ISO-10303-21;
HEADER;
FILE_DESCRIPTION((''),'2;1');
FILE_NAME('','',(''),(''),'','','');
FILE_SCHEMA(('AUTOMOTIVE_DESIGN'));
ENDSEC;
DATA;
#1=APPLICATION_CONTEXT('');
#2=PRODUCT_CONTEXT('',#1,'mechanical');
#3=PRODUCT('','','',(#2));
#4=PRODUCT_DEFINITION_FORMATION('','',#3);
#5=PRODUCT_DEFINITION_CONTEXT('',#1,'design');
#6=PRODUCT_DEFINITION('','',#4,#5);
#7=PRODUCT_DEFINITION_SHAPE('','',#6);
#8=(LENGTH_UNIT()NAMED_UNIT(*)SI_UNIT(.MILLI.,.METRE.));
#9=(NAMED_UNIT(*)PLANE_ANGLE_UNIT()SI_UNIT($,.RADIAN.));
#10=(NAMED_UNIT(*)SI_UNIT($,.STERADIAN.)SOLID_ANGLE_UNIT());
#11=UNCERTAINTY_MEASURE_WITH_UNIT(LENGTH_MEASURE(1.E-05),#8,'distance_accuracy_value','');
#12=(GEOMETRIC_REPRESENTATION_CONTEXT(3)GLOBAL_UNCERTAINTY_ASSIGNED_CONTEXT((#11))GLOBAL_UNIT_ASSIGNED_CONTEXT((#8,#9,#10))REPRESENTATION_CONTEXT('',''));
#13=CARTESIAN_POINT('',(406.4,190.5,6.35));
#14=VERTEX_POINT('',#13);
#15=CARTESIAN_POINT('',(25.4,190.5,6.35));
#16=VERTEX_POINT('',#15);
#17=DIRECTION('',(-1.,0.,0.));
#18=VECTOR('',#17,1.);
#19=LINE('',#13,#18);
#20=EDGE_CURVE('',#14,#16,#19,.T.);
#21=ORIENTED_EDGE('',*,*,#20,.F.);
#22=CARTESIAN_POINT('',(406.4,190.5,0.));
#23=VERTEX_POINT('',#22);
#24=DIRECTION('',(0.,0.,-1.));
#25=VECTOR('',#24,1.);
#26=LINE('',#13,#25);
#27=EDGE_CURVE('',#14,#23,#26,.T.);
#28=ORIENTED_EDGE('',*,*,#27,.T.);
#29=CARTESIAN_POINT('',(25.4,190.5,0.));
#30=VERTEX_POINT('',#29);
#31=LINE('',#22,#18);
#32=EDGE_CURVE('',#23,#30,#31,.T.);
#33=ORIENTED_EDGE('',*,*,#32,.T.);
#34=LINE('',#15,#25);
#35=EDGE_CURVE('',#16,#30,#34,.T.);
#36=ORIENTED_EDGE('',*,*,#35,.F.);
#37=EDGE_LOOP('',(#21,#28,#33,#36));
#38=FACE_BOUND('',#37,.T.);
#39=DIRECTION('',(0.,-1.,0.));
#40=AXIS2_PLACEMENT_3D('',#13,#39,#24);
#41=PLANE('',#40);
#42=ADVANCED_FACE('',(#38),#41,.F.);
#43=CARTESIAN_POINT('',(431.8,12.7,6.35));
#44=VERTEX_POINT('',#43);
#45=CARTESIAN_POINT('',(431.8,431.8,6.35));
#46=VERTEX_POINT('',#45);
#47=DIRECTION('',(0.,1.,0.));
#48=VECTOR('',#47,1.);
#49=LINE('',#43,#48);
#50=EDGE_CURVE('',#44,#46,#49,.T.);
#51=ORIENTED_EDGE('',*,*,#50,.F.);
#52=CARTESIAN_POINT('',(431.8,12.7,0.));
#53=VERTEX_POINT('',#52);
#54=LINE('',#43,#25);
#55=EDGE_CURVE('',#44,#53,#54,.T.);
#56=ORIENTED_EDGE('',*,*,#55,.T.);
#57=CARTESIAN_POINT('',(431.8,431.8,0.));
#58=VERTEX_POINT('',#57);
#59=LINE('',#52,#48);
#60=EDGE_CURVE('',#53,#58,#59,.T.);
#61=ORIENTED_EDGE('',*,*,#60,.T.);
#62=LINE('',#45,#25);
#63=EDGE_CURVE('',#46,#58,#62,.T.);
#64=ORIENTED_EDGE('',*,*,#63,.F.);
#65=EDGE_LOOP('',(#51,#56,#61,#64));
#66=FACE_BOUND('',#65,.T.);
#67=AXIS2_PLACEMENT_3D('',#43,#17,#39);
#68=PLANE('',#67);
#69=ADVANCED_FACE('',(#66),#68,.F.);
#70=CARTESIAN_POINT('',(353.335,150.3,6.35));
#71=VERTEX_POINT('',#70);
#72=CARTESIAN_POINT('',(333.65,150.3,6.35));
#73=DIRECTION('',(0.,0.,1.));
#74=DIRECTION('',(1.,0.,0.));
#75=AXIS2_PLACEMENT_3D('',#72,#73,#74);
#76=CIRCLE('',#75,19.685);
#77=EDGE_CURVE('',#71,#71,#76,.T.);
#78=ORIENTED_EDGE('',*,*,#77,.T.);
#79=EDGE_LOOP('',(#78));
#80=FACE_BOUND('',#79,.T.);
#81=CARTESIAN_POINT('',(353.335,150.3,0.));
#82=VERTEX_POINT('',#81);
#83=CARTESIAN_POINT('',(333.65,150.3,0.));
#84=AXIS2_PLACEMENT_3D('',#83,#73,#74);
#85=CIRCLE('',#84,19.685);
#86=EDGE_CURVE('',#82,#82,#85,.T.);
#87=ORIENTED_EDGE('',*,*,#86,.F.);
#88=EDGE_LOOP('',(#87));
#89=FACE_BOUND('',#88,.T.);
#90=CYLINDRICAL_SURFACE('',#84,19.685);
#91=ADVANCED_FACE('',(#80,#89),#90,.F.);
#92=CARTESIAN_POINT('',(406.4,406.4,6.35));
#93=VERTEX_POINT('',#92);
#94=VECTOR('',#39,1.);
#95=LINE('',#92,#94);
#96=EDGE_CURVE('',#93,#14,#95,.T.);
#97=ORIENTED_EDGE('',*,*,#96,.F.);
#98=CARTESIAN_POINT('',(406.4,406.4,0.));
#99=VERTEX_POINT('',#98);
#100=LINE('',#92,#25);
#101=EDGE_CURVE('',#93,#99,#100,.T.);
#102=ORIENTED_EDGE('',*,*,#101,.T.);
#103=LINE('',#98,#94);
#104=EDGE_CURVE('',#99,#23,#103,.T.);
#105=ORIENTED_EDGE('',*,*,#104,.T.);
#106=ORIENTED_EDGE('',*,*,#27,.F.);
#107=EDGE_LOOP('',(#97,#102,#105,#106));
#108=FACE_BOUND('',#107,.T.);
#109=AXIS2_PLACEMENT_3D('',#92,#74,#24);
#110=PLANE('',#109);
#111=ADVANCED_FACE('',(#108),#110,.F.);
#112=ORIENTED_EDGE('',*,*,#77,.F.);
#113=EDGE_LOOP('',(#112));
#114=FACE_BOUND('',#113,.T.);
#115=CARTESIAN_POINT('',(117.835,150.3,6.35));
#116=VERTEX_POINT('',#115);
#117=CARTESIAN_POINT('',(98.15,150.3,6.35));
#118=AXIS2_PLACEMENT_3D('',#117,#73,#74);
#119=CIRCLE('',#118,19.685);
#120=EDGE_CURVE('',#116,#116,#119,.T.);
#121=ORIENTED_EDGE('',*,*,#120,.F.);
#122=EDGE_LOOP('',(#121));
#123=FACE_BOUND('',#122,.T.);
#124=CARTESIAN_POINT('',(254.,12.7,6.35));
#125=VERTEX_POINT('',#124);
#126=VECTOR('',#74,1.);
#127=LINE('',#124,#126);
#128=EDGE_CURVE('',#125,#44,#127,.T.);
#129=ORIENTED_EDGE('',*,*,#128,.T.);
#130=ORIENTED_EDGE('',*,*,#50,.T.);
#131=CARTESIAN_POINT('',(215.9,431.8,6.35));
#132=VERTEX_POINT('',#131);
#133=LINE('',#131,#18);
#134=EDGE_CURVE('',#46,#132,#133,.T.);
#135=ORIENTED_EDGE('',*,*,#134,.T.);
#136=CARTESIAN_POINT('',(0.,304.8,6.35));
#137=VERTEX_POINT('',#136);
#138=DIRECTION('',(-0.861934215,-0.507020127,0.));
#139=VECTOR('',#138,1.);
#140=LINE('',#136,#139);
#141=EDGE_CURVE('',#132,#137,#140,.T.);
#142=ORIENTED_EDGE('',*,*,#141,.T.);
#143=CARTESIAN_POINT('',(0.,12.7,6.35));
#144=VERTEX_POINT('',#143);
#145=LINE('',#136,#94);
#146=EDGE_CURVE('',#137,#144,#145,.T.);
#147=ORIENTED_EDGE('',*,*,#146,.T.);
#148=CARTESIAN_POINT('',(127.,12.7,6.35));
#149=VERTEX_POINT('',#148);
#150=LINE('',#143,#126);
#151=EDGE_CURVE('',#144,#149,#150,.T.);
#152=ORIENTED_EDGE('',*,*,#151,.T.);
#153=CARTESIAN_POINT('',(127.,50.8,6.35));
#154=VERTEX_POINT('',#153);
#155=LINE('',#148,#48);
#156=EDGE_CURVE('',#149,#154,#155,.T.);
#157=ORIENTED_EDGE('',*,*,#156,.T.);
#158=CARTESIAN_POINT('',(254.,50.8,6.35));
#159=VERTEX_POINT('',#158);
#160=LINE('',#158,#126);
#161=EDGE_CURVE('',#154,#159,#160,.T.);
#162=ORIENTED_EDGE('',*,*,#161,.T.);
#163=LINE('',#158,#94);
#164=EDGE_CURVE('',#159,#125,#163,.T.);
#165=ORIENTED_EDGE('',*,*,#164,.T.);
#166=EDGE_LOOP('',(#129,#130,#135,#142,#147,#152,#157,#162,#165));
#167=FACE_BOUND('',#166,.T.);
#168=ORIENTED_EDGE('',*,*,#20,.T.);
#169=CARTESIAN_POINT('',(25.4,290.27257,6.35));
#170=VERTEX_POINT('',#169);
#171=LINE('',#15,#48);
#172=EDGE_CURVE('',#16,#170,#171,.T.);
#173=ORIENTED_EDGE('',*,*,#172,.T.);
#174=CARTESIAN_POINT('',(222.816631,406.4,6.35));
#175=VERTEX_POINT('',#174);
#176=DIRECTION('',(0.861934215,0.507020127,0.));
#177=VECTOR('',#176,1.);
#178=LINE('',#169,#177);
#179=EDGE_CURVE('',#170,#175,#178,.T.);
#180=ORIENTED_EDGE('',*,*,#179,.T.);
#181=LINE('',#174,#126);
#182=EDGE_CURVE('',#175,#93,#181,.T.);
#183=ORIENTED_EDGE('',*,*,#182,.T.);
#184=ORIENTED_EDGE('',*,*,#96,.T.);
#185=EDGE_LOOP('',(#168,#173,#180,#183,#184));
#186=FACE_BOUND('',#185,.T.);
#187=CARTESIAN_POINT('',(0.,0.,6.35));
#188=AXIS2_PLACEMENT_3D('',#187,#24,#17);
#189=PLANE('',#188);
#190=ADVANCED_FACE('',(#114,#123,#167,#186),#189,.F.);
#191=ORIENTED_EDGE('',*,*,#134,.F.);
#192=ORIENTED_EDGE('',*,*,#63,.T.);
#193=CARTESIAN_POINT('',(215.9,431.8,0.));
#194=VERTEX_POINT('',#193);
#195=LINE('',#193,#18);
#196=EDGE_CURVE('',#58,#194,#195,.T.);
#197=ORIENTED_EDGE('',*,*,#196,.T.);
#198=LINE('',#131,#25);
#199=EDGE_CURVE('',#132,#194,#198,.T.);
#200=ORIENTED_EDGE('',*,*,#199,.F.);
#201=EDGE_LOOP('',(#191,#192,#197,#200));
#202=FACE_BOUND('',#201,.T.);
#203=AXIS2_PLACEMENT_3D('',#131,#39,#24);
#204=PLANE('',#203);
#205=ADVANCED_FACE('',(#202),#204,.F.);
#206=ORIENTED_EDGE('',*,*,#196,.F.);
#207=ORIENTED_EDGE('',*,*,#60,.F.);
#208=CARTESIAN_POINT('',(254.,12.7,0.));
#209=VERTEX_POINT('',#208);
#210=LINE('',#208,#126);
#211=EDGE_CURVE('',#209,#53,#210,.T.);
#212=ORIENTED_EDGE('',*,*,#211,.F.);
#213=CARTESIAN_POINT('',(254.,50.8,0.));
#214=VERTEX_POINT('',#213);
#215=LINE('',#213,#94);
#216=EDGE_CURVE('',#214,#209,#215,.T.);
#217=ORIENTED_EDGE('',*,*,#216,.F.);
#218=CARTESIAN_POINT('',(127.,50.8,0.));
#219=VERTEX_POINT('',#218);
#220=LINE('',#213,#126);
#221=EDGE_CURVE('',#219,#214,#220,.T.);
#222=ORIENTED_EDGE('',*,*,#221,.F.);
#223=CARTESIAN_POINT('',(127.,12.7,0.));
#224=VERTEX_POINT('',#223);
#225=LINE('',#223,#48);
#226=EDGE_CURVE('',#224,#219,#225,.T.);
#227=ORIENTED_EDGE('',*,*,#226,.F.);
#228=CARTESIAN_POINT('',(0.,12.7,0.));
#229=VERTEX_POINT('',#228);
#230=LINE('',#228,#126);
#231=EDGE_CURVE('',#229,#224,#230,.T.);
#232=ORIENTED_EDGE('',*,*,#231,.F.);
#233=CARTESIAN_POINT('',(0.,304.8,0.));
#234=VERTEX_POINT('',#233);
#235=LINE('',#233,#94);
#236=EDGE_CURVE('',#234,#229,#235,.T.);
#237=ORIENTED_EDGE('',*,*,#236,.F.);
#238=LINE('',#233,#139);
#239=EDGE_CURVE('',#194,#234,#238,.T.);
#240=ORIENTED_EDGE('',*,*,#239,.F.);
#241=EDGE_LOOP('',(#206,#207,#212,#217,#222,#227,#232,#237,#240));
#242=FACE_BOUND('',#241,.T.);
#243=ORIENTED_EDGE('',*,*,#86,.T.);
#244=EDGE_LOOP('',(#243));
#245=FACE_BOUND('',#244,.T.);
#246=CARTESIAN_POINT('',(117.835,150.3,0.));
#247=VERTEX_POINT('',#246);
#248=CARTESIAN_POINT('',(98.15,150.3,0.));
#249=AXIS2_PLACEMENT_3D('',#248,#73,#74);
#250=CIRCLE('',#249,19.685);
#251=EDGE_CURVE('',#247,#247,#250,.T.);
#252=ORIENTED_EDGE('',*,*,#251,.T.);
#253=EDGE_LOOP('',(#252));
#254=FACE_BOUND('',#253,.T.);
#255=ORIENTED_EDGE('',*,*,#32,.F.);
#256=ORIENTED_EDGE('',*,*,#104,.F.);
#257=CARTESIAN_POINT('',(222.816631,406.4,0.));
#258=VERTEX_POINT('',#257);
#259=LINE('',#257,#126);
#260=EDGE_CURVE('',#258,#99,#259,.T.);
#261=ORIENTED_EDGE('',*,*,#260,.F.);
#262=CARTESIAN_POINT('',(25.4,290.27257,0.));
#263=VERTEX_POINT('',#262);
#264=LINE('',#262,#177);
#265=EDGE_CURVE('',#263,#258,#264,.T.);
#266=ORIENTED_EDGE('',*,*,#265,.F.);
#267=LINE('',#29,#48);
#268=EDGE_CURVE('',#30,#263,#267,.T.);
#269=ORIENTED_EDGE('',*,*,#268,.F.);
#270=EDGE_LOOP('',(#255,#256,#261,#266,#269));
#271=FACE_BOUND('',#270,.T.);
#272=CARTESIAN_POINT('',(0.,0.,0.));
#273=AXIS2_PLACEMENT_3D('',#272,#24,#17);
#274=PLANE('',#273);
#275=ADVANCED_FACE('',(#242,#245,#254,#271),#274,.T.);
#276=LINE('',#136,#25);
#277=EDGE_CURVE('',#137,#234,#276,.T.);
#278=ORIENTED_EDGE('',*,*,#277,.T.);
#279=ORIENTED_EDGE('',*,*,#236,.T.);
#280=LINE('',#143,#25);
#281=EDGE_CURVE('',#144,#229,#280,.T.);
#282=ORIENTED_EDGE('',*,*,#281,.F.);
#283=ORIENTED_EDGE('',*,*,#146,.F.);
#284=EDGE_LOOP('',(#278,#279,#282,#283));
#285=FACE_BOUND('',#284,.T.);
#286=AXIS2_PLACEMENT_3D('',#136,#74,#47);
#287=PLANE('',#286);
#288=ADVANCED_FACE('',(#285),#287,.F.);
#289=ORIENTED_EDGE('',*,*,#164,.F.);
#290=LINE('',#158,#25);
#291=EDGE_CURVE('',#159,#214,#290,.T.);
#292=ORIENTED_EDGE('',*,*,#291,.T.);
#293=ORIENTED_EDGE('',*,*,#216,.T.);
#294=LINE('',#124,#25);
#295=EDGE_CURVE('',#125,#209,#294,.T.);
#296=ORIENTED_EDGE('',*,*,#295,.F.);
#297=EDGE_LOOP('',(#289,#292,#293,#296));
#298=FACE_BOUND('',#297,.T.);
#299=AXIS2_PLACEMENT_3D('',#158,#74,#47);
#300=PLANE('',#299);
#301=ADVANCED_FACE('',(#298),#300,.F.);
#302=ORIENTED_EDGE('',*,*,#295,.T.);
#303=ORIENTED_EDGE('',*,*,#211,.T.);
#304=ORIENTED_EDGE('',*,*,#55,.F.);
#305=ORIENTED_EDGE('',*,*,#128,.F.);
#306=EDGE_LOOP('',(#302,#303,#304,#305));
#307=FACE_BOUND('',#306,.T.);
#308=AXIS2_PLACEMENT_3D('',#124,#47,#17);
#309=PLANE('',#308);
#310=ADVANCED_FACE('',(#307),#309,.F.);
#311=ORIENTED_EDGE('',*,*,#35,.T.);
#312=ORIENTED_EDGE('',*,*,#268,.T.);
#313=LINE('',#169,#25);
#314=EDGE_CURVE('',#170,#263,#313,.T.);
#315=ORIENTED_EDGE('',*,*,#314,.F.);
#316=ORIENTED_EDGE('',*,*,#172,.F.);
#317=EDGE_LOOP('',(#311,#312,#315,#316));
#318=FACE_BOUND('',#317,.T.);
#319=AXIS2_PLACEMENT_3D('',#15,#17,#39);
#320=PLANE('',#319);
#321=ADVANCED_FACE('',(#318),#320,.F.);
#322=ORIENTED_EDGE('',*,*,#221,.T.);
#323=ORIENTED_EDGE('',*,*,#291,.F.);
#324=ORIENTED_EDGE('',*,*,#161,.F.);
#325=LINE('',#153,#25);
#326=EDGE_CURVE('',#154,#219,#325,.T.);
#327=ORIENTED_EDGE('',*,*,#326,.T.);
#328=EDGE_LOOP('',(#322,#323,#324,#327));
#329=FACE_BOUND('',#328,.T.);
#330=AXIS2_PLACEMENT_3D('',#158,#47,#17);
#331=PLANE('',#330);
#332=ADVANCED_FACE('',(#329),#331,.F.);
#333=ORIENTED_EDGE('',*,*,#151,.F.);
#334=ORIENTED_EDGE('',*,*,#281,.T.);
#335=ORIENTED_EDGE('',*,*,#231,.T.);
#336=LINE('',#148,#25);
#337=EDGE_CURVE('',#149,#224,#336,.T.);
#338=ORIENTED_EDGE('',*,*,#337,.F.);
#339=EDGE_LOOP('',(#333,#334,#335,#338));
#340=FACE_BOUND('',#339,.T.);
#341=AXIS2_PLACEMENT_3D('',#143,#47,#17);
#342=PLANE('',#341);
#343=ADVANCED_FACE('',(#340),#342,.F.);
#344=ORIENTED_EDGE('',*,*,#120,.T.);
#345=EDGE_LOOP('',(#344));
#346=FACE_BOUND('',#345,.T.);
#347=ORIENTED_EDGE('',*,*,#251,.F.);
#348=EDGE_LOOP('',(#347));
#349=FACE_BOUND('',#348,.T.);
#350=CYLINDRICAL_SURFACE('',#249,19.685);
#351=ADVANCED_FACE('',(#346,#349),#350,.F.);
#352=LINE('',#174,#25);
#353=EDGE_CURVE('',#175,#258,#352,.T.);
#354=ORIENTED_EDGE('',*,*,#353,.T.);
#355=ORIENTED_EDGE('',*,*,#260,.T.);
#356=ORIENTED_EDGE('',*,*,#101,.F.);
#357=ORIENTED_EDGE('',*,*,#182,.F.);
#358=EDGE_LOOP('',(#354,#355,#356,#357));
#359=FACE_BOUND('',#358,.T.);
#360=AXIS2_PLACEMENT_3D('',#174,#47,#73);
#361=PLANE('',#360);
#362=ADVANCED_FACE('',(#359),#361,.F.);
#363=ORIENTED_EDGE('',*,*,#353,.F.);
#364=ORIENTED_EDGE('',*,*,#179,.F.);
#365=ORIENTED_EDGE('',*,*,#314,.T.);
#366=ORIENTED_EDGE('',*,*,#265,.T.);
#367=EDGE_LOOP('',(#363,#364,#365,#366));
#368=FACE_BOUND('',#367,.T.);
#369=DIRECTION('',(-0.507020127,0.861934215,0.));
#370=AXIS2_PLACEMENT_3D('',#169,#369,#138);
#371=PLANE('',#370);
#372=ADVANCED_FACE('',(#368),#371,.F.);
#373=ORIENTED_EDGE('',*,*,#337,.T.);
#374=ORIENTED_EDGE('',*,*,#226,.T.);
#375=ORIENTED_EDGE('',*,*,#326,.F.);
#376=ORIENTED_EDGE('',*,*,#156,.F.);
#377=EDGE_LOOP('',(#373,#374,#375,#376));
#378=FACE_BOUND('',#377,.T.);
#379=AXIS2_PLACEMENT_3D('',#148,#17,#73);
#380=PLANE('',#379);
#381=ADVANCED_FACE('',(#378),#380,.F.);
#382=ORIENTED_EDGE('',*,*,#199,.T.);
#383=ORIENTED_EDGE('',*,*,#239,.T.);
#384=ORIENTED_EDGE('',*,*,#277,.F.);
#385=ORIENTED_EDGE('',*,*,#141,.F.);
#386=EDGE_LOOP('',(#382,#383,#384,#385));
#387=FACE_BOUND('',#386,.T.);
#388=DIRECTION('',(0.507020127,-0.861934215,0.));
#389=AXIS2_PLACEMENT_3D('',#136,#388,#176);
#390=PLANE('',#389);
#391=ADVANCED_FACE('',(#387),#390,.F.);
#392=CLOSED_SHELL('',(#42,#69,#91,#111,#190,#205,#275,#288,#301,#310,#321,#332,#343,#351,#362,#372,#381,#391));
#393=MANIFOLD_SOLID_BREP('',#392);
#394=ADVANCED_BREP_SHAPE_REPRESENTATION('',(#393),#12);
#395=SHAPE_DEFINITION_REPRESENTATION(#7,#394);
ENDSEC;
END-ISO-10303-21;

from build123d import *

# Parameters (mm, degrees)
FRAME_EXTERIOR_MASTER_OUTLINE_R = 19.685
FRAME_EXTERIOR_MASTER_DEPTH     = 6.35
CUT_EXTRUDE1_DEPTH              = 611.690430988


# Read off the part's stored shape, not the designer's step: Frame Exterior Master
with BuildPart() as part:
    # Frame Exterior Master outline → Frame Exterior Master (new body)
    with BuildSketch(Plane.XY):
        Polygon((431.8, 12.7), (431.8, 431.8), (215.9, 431.8), (0, 304.8), (0, 12.7), (127, 12.7), (127, 50.8), (254, 50.8), (254, 12.7), align=None)
        with Locations((98.15, 150.3)):
            Circle(FRAME_EXTERIOR_MASTER_OUTLINE_R, mode=Mode.SUBTRACT)
        with Locations((333.65, 150.3)):
            Circle(FRAME_EXTERIOR_MASTER_OUTLINE_R, mode=Mode.SUBTRACT)
    extrude(amount=FRAME_EXTERIOR_MASTER_DEPTH)

    # Sketch1 → Cut-Extrude1 (cut, through all)
    with BuildSketch(Plane(origin=(0, 0, 0), x_dir=(-1, 0, 0), z_dir=(0, 0, -1))):
        Polygon((-406.4, 406.4), (-406.4, 190.5), (-25.4, 190.5), (-25.4, 290.27257022), (-222.816630625, 406.4), align=None)
    extrude(amount=-CUT_EXTRUDE1_DEPTH, mode=Mode.SUBTRACT)


solid = part.part
